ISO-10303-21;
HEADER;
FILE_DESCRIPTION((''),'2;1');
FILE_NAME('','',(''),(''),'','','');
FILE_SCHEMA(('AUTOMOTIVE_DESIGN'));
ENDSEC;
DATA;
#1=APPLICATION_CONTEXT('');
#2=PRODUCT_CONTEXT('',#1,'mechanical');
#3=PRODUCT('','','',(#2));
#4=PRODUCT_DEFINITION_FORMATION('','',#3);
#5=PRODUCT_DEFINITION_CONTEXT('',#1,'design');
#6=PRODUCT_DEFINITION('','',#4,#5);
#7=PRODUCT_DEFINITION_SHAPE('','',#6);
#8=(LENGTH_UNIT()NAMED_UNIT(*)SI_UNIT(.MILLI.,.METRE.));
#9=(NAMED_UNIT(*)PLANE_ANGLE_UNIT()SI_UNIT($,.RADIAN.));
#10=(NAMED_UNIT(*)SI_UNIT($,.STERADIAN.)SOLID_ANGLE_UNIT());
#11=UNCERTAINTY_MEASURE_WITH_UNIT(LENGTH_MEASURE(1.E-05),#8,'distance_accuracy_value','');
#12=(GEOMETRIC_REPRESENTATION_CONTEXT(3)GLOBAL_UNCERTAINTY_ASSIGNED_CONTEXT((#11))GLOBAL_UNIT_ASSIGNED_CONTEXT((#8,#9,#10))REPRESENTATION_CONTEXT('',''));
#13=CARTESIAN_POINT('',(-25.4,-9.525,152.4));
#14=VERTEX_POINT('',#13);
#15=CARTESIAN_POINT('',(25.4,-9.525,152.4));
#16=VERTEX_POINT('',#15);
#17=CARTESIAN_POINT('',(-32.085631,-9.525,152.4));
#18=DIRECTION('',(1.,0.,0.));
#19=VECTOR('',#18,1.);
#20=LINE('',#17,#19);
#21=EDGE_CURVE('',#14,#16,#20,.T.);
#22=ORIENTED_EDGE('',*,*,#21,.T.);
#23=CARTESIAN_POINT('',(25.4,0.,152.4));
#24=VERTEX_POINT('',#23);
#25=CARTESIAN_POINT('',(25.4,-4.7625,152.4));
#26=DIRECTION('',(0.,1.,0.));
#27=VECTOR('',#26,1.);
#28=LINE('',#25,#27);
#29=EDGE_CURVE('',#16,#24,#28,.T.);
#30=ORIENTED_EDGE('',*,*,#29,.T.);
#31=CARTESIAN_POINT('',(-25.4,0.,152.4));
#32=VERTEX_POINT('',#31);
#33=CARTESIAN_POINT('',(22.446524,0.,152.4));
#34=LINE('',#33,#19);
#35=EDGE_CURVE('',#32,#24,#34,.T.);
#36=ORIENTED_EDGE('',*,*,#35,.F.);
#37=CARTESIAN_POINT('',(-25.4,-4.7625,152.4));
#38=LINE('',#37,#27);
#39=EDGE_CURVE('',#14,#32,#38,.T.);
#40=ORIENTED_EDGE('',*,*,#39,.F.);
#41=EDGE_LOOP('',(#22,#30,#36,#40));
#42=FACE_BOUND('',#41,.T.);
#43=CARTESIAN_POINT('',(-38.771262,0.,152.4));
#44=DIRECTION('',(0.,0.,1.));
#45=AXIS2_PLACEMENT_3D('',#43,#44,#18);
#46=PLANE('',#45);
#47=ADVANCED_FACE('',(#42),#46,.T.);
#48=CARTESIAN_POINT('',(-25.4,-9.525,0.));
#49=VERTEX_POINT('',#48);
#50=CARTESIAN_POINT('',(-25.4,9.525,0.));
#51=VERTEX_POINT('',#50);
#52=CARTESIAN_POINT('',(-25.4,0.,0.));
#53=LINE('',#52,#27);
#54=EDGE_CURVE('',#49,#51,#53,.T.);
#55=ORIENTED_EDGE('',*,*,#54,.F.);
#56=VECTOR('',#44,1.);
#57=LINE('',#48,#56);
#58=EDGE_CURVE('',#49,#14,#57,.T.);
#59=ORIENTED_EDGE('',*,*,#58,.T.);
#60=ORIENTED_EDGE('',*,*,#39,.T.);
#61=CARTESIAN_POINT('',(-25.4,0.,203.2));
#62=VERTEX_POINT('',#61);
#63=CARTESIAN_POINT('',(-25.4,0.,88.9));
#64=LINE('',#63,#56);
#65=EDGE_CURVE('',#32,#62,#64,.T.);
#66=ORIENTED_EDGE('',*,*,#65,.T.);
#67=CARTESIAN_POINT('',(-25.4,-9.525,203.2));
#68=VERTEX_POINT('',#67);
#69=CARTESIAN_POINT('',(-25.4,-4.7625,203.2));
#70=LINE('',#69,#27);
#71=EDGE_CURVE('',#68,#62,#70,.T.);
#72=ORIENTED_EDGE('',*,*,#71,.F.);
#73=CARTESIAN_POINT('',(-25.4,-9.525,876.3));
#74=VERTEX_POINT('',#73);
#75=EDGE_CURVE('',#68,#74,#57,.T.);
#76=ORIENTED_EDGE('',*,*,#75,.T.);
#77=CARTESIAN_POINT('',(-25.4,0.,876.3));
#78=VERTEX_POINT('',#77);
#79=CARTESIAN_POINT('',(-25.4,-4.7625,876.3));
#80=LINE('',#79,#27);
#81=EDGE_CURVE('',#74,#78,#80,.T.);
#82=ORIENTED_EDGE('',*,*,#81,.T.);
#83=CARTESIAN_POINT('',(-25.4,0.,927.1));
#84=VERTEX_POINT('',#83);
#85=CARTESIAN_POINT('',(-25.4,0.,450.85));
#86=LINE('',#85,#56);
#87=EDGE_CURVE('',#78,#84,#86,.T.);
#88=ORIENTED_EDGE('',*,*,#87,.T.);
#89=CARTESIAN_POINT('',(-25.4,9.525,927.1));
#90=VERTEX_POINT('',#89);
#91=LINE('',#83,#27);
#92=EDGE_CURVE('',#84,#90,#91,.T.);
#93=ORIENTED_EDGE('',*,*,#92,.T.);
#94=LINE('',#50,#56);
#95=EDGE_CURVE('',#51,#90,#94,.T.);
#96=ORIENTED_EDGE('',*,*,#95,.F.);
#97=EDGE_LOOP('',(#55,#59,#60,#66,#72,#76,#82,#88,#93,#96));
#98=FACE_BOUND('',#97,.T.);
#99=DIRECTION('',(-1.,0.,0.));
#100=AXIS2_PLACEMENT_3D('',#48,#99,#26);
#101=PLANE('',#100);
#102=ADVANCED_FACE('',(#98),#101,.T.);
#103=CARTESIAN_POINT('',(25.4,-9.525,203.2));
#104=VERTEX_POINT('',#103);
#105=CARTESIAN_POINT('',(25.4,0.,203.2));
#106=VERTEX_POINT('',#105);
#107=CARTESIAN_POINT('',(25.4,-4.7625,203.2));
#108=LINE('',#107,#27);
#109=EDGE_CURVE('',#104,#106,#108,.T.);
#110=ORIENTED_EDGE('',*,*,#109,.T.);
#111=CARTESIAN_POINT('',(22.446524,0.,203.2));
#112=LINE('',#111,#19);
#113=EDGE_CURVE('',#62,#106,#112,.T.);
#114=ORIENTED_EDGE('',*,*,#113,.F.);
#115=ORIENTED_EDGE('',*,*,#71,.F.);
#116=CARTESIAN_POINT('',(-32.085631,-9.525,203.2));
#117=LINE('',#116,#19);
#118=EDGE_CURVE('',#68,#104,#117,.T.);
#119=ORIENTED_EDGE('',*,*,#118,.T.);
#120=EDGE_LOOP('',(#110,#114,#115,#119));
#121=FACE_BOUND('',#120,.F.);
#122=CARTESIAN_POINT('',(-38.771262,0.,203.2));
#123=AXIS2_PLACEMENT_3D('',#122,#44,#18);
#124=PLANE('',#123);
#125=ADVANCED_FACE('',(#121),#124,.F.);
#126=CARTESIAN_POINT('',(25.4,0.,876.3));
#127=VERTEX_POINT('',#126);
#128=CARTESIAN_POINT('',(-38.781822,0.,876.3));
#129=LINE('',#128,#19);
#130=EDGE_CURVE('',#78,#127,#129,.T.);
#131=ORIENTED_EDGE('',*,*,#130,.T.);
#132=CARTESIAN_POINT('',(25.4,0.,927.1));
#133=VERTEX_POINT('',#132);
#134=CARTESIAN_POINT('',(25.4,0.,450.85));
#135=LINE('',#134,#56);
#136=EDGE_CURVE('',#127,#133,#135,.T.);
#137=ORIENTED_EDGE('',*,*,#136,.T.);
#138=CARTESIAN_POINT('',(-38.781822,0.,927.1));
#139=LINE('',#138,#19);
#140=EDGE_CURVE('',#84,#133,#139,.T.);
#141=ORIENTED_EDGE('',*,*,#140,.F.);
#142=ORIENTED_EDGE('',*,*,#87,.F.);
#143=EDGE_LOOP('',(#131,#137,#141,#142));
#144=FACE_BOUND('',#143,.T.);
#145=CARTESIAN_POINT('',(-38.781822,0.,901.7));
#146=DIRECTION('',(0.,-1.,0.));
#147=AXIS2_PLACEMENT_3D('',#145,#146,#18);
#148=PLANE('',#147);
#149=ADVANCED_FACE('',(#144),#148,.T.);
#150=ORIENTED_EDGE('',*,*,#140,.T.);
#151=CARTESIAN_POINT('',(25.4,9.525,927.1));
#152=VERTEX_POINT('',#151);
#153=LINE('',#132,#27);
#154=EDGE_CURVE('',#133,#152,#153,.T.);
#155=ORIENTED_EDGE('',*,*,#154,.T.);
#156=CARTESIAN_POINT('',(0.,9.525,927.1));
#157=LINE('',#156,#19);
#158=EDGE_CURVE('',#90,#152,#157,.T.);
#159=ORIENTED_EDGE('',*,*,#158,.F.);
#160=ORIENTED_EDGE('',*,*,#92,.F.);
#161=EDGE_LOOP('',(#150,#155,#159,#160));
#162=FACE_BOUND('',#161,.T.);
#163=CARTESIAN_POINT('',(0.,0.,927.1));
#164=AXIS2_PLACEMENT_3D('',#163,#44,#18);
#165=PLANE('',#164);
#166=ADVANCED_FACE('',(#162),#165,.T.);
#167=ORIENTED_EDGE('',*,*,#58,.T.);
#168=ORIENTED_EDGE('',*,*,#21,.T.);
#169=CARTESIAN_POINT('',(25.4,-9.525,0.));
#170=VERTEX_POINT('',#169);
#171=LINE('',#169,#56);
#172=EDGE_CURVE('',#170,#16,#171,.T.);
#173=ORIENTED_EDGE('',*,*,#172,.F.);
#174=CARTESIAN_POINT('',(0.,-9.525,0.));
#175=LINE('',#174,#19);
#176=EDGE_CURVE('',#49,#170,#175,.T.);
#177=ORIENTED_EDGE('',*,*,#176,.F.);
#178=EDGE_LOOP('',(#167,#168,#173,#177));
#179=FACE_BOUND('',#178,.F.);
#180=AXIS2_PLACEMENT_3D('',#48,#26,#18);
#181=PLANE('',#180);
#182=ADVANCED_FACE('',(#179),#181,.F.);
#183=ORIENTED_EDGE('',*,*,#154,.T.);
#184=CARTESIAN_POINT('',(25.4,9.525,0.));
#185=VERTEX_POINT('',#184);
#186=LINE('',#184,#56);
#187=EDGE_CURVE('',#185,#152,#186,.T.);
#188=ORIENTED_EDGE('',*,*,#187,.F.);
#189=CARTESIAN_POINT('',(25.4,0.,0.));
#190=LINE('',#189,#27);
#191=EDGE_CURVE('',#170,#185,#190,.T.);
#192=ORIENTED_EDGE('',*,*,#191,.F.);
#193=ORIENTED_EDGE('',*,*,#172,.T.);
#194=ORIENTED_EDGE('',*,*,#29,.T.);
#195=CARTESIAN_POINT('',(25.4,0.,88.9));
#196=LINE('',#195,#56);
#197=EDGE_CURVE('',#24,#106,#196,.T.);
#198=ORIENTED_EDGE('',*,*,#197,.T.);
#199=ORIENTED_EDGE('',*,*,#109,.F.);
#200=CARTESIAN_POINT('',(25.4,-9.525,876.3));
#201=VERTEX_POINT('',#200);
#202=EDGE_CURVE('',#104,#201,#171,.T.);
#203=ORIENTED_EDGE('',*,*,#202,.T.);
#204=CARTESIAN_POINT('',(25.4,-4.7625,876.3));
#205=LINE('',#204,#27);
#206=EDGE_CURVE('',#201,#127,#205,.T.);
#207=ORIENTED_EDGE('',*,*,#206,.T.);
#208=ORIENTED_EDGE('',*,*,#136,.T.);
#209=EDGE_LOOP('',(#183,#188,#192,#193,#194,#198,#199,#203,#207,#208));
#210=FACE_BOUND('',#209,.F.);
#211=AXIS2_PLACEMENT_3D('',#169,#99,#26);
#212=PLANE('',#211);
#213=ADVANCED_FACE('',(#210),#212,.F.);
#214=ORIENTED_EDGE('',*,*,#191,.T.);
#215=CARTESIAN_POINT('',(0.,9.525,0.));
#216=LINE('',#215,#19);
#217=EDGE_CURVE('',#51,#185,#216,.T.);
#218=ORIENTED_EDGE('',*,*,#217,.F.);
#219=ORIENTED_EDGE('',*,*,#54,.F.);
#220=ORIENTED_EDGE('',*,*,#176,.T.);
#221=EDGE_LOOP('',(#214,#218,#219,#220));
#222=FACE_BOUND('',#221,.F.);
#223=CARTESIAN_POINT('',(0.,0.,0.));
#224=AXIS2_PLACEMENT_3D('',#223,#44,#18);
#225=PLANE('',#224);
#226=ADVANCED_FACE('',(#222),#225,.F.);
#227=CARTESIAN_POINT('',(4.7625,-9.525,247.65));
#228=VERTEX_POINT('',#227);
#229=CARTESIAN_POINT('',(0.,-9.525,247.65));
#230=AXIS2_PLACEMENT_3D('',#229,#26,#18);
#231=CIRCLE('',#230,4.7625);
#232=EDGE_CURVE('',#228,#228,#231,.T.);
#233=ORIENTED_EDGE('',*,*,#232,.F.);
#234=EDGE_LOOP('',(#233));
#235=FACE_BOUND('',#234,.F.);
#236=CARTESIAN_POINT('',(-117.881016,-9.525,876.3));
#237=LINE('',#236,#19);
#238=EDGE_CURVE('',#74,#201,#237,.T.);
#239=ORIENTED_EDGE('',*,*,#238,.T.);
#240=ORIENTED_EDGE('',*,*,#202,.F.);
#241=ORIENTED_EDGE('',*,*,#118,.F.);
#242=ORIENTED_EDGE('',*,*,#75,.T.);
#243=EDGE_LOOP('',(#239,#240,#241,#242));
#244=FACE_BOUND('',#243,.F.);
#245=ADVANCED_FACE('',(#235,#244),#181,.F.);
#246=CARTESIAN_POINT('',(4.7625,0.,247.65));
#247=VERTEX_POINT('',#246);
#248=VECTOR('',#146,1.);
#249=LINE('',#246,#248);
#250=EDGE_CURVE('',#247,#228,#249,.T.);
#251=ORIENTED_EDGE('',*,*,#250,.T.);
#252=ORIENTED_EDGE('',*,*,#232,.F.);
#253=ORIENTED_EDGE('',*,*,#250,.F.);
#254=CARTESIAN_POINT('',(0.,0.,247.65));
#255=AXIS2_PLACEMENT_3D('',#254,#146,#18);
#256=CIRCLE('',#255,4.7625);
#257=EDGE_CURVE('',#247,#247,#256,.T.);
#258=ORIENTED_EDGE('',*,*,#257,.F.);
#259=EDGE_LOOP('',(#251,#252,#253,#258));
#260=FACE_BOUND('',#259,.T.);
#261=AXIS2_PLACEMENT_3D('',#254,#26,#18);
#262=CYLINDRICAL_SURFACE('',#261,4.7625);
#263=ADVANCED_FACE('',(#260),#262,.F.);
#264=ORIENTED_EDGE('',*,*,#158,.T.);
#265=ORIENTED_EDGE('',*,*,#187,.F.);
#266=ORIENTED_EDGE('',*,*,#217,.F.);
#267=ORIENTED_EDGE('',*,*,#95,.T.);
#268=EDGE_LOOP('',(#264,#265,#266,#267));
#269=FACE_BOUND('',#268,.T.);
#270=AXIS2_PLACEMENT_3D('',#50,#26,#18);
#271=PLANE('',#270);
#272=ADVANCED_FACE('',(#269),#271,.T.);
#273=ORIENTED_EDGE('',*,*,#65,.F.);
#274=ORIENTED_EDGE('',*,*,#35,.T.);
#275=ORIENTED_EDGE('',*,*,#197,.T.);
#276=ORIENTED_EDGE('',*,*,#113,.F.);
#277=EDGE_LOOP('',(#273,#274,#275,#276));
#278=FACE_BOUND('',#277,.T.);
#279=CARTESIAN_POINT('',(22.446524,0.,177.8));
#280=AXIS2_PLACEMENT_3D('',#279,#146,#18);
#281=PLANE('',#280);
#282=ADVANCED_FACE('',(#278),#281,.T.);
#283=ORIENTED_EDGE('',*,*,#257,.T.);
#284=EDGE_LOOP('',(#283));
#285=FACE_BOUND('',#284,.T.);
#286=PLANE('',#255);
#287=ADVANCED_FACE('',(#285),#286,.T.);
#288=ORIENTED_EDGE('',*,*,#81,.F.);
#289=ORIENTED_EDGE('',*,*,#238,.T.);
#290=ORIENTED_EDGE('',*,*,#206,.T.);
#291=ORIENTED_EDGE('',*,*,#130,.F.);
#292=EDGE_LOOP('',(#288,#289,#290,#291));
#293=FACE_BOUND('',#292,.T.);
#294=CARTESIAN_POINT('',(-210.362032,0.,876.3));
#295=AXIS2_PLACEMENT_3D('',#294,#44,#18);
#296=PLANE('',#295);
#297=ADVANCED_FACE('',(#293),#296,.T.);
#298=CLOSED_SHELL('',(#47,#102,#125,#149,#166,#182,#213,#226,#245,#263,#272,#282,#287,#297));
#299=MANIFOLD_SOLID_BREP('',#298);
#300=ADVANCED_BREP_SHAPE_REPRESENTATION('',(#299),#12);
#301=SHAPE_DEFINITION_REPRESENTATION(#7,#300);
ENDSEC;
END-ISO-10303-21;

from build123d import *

# Parameters (mm, degrees)
F0_W     = 50.8
F0_H     = 19.05
F1_DEPTH = 927.1
F2_W     = 122.43557321
F2_H     = 50.8
F2_W_2   = 343.1604206562
F3_DEPTH = 25.4
F4_R     = 4.7625
F5_DEPTH = 25.4


# Not quite as in the source:
# - a feature names something its author has since deleted; it is built from what else it names


with BuildPart() as f1:
    # F0 (on Top) → F1 (new body)
    with BuildSketch(Plane.XY):
        Rectangle(F0_W, F0_H)
    extrude(amount=F1_DEPTH)

    # F2 (on Front) → F3 (cut)
    with BuildSketch(Plane.XZ):
        with Locations((22.4465244144, 177.8)):
            Rectangle(F2_W, F2_H)
        with Locations((-38.7818217278, 901.7)):
            Rectangle(F2_W_2, F2_H)
    extrude(amount=F3_DEPTH, mode=Mode.SUBTRACT)

    # F4 (on Front) → F5 (cut)
    with BuildSketch(Plane.XZ):
        with Locations((0, 247.65)):
            Circle(F4_R)
    extrude(amount=F5_DEPTH, mode=Mode.SUBTRACT)


solid = f1.part
